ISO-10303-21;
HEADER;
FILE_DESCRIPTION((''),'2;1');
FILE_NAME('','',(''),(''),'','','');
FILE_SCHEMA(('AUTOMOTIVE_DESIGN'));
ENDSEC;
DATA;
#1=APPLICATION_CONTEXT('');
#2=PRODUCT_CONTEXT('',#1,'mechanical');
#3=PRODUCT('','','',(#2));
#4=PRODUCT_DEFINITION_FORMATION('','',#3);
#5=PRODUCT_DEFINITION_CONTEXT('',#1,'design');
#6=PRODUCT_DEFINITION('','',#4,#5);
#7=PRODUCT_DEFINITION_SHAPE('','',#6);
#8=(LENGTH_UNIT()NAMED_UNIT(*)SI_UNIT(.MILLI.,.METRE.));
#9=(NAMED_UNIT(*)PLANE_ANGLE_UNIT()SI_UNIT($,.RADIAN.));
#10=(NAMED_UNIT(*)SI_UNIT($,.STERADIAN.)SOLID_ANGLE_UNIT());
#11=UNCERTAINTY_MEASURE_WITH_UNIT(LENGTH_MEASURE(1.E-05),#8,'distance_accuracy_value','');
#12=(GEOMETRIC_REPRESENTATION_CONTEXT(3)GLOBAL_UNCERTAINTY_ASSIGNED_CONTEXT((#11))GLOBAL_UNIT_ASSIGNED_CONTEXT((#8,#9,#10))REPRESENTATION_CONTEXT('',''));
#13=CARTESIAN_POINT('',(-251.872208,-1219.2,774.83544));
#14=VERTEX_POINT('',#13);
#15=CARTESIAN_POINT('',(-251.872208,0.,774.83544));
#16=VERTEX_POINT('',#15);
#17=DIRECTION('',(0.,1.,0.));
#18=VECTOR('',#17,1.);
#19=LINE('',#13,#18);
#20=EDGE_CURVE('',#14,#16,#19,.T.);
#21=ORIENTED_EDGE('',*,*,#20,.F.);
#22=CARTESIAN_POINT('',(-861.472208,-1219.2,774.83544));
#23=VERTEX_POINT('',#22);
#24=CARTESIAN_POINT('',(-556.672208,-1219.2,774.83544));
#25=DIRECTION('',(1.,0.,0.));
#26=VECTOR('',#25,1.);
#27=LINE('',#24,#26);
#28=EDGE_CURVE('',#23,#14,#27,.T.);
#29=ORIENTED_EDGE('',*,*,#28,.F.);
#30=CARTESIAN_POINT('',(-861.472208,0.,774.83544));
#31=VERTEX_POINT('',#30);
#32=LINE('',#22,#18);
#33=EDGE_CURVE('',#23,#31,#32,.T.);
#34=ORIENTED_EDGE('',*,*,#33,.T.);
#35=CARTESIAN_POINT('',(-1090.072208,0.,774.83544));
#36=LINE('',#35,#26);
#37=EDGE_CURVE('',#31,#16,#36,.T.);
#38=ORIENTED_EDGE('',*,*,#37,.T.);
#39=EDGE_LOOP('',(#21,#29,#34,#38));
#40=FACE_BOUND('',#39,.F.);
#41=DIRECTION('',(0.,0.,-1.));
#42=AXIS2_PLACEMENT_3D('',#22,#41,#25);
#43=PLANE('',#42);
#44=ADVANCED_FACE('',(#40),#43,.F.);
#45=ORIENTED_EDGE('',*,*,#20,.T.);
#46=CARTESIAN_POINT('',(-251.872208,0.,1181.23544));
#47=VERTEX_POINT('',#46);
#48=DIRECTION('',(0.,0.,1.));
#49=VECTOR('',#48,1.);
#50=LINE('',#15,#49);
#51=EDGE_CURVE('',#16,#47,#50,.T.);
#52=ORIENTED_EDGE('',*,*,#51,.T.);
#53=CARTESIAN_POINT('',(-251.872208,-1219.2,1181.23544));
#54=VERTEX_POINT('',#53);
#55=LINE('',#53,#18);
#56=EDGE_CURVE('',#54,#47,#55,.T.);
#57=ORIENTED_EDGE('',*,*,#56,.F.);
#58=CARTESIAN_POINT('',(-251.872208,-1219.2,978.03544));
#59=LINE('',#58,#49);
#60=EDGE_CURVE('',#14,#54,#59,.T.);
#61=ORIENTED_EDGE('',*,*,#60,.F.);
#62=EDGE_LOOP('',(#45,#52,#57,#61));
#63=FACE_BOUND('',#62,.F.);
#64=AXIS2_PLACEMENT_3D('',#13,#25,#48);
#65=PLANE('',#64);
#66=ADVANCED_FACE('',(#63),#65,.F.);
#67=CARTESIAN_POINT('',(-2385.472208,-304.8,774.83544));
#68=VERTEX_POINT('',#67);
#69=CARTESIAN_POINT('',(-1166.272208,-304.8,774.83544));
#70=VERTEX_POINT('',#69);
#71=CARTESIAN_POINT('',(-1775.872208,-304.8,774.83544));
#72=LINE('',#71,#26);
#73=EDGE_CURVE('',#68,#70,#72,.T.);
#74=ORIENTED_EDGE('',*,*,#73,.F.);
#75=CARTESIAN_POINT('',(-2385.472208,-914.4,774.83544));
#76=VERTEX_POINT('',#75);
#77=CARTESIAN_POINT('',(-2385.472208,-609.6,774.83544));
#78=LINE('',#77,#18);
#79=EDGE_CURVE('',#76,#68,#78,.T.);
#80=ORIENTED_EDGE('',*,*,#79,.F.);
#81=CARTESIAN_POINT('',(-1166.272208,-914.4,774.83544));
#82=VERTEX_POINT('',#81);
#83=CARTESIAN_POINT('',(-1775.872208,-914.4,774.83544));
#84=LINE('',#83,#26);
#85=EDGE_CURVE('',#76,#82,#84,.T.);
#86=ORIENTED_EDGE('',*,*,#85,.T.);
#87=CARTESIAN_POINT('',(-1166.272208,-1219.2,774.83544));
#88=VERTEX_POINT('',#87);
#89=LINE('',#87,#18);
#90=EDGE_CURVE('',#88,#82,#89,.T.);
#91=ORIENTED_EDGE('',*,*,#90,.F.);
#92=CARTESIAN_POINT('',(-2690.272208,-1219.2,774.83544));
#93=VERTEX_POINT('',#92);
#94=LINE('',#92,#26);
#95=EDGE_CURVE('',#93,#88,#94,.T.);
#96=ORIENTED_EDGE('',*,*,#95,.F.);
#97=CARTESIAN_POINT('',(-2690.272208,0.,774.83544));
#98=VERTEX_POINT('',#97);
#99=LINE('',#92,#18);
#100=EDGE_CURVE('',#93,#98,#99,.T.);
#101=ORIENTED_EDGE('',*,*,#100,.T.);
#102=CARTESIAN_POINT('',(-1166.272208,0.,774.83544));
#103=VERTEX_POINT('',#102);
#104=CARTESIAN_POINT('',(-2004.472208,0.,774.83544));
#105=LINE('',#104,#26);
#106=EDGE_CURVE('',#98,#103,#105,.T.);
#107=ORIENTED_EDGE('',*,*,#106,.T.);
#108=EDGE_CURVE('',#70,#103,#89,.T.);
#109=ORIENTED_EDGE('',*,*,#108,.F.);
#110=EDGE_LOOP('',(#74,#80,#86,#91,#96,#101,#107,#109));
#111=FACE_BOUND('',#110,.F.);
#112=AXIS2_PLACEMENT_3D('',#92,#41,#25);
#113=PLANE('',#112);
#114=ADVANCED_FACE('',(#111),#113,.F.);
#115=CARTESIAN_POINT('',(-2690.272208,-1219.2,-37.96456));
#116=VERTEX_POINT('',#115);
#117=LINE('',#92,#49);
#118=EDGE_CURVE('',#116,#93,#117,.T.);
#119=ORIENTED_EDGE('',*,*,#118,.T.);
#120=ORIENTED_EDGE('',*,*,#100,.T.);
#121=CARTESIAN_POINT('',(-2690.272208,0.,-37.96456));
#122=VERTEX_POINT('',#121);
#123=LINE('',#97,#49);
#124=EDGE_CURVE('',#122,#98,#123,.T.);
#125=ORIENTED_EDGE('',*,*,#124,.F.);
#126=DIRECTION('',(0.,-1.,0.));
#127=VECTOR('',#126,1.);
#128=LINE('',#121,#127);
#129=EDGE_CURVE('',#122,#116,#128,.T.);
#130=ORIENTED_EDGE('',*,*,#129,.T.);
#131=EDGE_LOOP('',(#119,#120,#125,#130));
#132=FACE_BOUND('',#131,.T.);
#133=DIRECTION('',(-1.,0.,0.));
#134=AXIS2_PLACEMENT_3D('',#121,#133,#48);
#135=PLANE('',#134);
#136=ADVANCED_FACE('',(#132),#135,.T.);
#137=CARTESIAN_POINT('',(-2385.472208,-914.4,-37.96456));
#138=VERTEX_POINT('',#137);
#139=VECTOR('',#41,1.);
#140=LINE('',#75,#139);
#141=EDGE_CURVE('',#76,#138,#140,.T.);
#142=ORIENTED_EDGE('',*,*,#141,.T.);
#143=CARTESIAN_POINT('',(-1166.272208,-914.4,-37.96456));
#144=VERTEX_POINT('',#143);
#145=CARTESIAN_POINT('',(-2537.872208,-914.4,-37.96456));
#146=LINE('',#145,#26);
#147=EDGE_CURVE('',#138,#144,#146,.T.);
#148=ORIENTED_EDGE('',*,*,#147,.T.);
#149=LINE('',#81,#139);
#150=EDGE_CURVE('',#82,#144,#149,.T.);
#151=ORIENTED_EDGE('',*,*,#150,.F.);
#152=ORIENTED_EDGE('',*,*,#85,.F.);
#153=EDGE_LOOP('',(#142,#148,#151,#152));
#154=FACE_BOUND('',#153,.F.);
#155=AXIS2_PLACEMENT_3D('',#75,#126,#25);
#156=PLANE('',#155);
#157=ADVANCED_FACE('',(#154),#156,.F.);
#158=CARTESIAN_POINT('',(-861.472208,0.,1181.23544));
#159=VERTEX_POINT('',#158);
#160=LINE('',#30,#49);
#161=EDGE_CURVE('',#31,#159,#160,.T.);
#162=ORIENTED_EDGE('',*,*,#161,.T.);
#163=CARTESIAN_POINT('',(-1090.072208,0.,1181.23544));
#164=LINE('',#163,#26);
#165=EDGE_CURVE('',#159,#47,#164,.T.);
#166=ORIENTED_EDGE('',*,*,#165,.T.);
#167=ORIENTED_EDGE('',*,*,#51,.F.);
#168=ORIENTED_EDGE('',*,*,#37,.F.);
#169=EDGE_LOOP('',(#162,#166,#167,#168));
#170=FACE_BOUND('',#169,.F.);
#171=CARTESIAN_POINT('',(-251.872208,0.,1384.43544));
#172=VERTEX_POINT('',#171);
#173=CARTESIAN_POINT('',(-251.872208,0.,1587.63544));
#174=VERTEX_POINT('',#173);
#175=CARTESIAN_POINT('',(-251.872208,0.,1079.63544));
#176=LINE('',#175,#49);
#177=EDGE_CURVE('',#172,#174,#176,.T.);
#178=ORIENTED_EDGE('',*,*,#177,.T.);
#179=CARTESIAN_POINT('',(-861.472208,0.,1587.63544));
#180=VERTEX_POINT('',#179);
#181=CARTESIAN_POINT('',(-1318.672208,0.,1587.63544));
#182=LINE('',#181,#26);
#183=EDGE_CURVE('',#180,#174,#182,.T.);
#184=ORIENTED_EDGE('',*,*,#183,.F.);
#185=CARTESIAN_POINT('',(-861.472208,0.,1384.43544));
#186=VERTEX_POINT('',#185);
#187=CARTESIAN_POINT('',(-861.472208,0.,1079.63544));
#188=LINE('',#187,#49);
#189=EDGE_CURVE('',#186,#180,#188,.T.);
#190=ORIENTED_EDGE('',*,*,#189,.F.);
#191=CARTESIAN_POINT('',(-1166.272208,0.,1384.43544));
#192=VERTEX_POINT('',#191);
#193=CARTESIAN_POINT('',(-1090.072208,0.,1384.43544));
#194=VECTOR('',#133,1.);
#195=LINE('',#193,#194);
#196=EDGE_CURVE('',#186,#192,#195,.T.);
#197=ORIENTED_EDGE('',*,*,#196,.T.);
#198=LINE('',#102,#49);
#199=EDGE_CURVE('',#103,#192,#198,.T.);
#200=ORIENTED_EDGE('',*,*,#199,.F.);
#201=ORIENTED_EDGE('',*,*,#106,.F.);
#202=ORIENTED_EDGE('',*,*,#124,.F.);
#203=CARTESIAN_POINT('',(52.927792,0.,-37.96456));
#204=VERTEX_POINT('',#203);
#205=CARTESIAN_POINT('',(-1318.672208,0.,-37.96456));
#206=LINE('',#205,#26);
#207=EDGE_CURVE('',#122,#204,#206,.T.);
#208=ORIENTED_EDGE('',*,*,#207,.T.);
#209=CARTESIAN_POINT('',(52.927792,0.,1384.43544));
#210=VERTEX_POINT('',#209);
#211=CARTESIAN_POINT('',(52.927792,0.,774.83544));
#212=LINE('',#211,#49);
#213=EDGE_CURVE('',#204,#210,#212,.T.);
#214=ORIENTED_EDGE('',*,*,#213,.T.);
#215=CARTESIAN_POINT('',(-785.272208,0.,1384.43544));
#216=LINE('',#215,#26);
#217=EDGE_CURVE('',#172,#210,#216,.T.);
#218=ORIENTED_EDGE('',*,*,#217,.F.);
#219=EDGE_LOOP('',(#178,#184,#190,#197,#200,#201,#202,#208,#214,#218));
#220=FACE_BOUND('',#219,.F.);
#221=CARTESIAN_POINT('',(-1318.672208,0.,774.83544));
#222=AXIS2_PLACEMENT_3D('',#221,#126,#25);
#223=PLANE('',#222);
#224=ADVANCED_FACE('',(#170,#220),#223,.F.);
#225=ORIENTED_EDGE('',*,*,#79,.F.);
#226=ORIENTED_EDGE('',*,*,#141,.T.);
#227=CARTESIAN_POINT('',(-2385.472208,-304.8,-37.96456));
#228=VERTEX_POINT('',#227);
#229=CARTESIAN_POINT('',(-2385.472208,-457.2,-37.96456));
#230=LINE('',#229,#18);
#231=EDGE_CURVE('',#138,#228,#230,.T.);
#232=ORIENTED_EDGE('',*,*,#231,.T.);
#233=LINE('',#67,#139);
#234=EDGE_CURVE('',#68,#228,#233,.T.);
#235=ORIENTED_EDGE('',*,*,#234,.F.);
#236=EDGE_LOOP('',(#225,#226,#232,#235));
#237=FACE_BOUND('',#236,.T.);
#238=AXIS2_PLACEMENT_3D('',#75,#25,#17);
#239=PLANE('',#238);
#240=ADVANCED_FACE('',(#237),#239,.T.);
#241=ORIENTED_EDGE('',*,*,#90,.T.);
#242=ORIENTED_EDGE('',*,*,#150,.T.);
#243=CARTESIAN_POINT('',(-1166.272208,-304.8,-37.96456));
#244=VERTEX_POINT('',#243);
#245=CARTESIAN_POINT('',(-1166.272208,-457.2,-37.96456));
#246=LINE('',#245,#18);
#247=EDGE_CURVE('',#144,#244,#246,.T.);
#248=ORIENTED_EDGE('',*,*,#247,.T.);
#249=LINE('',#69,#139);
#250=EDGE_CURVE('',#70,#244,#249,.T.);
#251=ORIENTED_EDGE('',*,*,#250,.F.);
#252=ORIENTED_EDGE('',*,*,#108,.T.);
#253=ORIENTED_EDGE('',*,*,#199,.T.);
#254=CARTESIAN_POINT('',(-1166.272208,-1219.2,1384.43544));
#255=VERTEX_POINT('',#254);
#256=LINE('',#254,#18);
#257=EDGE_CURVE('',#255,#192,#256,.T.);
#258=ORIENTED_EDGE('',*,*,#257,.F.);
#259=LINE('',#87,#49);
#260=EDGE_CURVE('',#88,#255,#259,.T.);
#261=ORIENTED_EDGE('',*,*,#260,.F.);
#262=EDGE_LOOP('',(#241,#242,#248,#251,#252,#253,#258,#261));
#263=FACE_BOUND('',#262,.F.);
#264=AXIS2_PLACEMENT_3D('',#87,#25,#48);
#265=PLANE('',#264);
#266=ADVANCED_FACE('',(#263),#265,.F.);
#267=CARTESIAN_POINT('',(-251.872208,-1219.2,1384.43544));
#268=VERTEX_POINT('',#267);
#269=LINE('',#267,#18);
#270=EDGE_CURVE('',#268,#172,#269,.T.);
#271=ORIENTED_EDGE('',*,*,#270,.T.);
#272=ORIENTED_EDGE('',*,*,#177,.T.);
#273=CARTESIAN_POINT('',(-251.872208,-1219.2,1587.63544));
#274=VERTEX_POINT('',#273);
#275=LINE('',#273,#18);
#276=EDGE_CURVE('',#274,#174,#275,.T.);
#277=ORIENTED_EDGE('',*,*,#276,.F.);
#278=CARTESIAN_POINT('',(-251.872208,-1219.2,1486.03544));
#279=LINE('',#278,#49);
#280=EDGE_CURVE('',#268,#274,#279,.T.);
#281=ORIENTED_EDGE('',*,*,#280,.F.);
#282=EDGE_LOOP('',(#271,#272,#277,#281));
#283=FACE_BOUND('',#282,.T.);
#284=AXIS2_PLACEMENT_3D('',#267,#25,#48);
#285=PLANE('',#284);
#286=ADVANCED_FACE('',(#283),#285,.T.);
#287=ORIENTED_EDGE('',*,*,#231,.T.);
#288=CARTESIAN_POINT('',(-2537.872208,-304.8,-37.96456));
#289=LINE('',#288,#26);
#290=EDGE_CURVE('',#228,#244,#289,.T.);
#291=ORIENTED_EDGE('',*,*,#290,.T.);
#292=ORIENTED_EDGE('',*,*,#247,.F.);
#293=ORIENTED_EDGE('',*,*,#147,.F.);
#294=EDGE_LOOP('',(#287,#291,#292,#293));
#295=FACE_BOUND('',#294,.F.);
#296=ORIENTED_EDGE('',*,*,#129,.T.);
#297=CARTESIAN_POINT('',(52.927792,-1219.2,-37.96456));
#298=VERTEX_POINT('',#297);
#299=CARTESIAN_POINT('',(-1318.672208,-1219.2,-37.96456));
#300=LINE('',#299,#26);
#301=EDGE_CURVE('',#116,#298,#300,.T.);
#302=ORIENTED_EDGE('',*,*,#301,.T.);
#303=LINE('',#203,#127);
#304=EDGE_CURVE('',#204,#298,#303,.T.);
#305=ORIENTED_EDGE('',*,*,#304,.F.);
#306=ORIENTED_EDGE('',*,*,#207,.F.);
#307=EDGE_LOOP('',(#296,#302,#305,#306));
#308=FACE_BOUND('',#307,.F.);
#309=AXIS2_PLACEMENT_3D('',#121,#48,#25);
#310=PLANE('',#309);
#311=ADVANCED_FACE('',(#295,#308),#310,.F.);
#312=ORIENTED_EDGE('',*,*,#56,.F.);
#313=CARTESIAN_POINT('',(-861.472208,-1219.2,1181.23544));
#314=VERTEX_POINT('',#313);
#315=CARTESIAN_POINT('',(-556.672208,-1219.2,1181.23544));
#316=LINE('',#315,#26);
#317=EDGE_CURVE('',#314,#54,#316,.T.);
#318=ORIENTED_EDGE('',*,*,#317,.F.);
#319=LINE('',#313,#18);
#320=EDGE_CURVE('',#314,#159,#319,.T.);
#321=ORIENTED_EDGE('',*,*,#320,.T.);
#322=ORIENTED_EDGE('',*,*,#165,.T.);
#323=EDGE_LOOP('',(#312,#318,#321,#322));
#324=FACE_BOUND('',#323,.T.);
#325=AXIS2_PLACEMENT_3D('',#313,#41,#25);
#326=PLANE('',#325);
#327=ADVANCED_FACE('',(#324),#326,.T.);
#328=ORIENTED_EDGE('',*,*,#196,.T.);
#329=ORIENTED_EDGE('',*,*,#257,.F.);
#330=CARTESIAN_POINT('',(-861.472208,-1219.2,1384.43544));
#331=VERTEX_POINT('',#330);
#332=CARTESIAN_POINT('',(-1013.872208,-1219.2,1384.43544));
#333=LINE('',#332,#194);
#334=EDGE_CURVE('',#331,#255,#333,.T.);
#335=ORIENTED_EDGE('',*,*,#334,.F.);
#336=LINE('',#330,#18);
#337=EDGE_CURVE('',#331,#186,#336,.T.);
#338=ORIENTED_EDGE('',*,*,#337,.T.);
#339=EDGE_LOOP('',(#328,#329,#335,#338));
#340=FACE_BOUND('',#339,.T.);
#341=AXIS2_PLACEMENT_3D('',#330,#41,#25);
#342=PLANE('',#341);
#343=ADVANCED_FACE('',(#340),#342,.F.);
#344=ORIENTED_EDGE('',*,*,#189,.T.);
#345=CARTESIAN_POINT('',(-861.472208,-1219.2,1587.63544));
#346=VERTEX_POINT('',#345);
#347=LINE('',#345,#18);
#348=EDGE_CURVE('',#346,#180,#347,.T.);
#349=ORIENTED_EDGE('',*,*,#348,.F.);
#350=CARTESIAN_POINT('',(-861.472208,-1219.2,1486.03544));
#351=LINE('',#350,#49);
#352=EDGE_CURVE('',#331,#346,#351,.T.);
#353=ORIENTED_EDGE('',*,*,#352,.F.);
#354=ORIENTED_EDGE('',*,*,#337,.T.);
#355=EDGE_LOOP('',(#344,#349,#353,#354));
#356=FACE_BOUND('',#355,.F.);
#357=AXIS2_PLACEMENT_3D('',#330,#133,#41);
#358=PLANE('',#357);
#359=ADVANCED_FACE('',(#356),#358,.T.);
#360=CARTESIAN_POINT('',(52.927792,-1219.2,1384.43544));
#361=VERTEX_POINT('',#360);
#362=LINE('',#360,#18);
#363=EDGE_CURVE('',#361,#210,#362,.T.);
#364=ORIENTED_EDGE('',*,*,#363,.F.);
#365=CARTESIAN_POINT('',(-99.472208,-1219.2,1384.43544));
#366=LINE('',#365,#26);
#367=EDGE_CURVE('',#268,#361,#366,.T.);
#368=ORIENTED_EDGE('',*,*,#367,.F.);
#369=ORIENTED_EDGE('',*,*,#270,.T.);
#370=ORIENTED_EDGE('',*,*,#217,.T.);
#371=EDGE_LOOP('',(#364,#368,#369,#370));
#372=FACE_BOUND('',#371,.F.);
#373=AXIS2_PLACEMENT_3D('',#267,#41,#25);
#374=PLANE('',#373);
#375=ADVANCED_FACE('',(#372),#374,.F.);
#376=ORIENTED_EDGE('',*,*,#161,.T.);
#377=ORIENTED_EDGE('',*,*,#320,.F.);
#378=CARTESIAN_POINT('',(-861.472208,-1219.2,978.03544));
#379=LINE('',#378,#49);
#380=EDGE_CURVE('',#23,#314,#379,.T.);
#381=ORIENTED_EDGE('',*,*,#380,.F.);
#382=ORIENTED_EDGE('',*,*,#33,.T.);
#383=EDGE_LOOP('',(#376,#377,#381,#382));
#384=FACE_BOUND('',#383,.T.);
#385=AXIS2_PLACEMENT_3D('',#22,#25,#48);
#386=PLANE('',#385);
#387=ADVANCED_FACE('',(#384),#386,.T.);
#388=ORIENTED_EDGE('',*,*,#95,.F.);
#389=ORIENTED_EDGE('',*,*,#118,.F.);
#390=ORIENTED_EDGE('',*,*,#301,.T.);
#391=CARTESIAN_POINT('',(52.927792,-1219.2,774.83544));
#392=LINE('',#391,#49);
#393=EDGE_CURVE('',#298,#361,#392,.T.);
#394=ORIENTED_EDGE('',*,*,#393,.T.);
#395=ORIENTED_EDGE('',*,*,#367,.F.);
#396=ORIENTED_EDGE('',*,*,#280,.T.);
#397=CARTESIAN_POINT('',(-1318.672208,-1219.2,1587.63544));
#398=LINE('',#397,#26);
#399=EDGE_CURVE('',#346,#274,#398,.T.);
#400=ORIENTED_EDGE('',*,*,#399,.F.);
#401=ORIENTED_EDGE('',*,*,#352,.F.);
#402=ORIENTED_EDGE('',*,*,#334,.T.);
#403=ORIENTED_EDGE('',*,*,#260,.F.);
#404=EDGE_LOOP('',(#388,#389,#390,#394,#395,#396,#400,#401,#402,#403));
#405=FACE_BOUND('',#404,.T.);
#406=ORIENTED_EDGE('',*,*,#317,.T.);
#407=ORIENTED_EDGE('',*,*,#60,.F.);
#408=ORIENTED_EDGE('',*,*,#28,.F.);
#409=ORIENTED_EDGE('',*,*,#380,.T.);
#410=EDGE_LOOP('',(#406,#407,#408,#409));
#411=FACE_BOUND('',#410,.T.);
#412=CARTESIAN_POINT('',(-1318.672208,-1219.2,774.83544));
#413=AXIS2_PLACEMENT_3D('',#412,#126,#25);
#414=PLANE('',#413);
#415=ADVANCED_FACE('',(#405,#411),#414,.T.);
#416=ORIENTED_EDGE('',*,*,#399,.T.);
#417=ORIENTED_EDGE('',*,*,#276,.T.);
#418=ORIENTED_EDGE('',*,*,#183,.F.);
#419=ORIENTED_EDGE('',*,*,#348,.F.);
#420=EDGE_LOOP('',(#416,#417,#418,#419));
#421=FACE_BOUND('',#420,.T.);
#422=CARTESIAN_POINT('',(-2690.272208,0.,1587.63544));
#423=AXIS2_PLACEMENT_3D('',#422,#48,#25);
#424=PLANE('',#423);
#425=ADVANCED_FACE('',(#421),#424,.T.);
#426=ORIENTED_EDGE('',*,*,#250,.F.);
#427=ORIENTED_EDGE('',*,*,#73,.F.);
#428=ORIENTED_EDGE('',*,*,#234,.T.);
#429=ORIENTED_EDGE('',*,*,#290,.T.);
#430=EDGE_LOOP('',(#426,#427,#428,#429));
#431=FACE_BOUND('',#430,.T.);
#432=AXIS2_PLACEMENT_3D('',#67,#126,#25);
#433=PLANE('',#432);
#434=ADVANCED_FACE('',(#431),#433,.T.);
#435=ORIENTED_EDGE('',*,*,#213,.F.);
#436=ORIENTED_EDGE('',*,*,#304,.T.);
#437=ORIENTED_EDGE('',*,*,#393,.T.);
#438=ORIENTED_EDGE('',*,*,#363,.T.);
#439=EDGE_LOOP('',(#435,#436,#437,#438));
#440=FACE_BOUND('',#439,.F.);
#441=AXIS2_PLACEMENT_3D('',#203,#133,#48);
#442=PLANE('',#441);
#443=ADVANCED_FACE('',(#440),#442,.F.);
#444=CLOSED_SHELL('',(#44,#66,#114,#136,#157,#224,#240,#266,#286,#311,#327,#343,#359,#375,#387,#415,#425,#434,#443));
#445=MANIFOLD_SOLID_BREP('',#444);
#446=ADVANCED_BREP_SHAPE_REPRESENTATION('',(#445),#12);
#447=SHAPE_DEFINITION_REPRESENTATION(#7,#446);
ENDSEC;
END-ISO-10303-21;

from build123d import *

# Parameters (mm, degrees)
F0_W      = 2743.2
F0_H      = 1625.6
F1_DEPTH  = 1219.2
F2_W      = 304.8
F2_H      = 203.2
F3_DEPTH  = 1219.201
F5_DEPTH  = 1219.201
F9_W      = 609.6
F9_H      = 406.4
F10_DEPTH = 1219.201
F11_W     = 1219.2
F11_H     = 609.6
F12_DEPTH = 812.801


# Not quite as in the source:
# - a feature of the source that left no trace in its solid (it failed there, or was rolled back) is left out
# - a pattern or mirror of a feature is missing from the dataset's text; its kind, count and spacing are read off the source's solid


with BuildPart() as f1:
    # F0 (on Front) → F1 (new body)
    with BuildSketch(Plane.XZ):
        with Locations((-1318.6722079277, 774.8354399085)):
            Rectangle(F0_W, F0_H)
    extrude(amount=F1_DEPTH)

    # F2 (on face) → F3 (cut, through all)
    with BuildSketch(Plane.XZ.offset(1219.2)):
        with Locations((-99.4722079277, 1486.0354399085)):
            Rectangle(F2_W, F2_H)
    f3 = extrude(amount=-F3_DEPTH, mode=Mode.SUBTRACT)

    # F3_copies: F3 across plane
    add(f3.mirror(Plane(origin=(-556.672208, 0, 0), x_dir=(0, 0, -1), z_dir=(-1, 0, 0))), mode=Mode.SUBTRACT)

    # F4 (on face) → F5 (cut, through all)
    with BuildSketch(Plane.XZ.offset(1219.2)):
        Polygon((-1166.2722079277, 1587.6354399085), (-2690.2722079277, 1587.6354399085), (-2690.2722079277, 774.8354399085), (-1166.2722079277, 774.8354399085), (-1166.2722079277, 1384.4354399085), align=None)
    extrude(amount=-F5_DEPTH, mode=Mode.SUBTRACT)

    # F9 (on face) → F10 (cut, through all)
    with BuildSketch(Plane.XZ.offset(1219.2)):
        with Locations((-556.6722079277, 978.0354399085)):
            Rectangle(F9_W, F9_H)
    extrude(amount=-F10_DEPTH, mode=Mode.SUBTRACT)

    # F11 (on face) → F12 (cut, through all)
    with BuildSketch(Plane.XY.offset(774.8354399085)):
        with Locations((-1775.8722079277, -609.6)):
            Rectangle(F11_W, F11_H)
    extrude(amount=-F12_DEPTH, mode=Mode.SUBTRACT)


solid = f1.part
